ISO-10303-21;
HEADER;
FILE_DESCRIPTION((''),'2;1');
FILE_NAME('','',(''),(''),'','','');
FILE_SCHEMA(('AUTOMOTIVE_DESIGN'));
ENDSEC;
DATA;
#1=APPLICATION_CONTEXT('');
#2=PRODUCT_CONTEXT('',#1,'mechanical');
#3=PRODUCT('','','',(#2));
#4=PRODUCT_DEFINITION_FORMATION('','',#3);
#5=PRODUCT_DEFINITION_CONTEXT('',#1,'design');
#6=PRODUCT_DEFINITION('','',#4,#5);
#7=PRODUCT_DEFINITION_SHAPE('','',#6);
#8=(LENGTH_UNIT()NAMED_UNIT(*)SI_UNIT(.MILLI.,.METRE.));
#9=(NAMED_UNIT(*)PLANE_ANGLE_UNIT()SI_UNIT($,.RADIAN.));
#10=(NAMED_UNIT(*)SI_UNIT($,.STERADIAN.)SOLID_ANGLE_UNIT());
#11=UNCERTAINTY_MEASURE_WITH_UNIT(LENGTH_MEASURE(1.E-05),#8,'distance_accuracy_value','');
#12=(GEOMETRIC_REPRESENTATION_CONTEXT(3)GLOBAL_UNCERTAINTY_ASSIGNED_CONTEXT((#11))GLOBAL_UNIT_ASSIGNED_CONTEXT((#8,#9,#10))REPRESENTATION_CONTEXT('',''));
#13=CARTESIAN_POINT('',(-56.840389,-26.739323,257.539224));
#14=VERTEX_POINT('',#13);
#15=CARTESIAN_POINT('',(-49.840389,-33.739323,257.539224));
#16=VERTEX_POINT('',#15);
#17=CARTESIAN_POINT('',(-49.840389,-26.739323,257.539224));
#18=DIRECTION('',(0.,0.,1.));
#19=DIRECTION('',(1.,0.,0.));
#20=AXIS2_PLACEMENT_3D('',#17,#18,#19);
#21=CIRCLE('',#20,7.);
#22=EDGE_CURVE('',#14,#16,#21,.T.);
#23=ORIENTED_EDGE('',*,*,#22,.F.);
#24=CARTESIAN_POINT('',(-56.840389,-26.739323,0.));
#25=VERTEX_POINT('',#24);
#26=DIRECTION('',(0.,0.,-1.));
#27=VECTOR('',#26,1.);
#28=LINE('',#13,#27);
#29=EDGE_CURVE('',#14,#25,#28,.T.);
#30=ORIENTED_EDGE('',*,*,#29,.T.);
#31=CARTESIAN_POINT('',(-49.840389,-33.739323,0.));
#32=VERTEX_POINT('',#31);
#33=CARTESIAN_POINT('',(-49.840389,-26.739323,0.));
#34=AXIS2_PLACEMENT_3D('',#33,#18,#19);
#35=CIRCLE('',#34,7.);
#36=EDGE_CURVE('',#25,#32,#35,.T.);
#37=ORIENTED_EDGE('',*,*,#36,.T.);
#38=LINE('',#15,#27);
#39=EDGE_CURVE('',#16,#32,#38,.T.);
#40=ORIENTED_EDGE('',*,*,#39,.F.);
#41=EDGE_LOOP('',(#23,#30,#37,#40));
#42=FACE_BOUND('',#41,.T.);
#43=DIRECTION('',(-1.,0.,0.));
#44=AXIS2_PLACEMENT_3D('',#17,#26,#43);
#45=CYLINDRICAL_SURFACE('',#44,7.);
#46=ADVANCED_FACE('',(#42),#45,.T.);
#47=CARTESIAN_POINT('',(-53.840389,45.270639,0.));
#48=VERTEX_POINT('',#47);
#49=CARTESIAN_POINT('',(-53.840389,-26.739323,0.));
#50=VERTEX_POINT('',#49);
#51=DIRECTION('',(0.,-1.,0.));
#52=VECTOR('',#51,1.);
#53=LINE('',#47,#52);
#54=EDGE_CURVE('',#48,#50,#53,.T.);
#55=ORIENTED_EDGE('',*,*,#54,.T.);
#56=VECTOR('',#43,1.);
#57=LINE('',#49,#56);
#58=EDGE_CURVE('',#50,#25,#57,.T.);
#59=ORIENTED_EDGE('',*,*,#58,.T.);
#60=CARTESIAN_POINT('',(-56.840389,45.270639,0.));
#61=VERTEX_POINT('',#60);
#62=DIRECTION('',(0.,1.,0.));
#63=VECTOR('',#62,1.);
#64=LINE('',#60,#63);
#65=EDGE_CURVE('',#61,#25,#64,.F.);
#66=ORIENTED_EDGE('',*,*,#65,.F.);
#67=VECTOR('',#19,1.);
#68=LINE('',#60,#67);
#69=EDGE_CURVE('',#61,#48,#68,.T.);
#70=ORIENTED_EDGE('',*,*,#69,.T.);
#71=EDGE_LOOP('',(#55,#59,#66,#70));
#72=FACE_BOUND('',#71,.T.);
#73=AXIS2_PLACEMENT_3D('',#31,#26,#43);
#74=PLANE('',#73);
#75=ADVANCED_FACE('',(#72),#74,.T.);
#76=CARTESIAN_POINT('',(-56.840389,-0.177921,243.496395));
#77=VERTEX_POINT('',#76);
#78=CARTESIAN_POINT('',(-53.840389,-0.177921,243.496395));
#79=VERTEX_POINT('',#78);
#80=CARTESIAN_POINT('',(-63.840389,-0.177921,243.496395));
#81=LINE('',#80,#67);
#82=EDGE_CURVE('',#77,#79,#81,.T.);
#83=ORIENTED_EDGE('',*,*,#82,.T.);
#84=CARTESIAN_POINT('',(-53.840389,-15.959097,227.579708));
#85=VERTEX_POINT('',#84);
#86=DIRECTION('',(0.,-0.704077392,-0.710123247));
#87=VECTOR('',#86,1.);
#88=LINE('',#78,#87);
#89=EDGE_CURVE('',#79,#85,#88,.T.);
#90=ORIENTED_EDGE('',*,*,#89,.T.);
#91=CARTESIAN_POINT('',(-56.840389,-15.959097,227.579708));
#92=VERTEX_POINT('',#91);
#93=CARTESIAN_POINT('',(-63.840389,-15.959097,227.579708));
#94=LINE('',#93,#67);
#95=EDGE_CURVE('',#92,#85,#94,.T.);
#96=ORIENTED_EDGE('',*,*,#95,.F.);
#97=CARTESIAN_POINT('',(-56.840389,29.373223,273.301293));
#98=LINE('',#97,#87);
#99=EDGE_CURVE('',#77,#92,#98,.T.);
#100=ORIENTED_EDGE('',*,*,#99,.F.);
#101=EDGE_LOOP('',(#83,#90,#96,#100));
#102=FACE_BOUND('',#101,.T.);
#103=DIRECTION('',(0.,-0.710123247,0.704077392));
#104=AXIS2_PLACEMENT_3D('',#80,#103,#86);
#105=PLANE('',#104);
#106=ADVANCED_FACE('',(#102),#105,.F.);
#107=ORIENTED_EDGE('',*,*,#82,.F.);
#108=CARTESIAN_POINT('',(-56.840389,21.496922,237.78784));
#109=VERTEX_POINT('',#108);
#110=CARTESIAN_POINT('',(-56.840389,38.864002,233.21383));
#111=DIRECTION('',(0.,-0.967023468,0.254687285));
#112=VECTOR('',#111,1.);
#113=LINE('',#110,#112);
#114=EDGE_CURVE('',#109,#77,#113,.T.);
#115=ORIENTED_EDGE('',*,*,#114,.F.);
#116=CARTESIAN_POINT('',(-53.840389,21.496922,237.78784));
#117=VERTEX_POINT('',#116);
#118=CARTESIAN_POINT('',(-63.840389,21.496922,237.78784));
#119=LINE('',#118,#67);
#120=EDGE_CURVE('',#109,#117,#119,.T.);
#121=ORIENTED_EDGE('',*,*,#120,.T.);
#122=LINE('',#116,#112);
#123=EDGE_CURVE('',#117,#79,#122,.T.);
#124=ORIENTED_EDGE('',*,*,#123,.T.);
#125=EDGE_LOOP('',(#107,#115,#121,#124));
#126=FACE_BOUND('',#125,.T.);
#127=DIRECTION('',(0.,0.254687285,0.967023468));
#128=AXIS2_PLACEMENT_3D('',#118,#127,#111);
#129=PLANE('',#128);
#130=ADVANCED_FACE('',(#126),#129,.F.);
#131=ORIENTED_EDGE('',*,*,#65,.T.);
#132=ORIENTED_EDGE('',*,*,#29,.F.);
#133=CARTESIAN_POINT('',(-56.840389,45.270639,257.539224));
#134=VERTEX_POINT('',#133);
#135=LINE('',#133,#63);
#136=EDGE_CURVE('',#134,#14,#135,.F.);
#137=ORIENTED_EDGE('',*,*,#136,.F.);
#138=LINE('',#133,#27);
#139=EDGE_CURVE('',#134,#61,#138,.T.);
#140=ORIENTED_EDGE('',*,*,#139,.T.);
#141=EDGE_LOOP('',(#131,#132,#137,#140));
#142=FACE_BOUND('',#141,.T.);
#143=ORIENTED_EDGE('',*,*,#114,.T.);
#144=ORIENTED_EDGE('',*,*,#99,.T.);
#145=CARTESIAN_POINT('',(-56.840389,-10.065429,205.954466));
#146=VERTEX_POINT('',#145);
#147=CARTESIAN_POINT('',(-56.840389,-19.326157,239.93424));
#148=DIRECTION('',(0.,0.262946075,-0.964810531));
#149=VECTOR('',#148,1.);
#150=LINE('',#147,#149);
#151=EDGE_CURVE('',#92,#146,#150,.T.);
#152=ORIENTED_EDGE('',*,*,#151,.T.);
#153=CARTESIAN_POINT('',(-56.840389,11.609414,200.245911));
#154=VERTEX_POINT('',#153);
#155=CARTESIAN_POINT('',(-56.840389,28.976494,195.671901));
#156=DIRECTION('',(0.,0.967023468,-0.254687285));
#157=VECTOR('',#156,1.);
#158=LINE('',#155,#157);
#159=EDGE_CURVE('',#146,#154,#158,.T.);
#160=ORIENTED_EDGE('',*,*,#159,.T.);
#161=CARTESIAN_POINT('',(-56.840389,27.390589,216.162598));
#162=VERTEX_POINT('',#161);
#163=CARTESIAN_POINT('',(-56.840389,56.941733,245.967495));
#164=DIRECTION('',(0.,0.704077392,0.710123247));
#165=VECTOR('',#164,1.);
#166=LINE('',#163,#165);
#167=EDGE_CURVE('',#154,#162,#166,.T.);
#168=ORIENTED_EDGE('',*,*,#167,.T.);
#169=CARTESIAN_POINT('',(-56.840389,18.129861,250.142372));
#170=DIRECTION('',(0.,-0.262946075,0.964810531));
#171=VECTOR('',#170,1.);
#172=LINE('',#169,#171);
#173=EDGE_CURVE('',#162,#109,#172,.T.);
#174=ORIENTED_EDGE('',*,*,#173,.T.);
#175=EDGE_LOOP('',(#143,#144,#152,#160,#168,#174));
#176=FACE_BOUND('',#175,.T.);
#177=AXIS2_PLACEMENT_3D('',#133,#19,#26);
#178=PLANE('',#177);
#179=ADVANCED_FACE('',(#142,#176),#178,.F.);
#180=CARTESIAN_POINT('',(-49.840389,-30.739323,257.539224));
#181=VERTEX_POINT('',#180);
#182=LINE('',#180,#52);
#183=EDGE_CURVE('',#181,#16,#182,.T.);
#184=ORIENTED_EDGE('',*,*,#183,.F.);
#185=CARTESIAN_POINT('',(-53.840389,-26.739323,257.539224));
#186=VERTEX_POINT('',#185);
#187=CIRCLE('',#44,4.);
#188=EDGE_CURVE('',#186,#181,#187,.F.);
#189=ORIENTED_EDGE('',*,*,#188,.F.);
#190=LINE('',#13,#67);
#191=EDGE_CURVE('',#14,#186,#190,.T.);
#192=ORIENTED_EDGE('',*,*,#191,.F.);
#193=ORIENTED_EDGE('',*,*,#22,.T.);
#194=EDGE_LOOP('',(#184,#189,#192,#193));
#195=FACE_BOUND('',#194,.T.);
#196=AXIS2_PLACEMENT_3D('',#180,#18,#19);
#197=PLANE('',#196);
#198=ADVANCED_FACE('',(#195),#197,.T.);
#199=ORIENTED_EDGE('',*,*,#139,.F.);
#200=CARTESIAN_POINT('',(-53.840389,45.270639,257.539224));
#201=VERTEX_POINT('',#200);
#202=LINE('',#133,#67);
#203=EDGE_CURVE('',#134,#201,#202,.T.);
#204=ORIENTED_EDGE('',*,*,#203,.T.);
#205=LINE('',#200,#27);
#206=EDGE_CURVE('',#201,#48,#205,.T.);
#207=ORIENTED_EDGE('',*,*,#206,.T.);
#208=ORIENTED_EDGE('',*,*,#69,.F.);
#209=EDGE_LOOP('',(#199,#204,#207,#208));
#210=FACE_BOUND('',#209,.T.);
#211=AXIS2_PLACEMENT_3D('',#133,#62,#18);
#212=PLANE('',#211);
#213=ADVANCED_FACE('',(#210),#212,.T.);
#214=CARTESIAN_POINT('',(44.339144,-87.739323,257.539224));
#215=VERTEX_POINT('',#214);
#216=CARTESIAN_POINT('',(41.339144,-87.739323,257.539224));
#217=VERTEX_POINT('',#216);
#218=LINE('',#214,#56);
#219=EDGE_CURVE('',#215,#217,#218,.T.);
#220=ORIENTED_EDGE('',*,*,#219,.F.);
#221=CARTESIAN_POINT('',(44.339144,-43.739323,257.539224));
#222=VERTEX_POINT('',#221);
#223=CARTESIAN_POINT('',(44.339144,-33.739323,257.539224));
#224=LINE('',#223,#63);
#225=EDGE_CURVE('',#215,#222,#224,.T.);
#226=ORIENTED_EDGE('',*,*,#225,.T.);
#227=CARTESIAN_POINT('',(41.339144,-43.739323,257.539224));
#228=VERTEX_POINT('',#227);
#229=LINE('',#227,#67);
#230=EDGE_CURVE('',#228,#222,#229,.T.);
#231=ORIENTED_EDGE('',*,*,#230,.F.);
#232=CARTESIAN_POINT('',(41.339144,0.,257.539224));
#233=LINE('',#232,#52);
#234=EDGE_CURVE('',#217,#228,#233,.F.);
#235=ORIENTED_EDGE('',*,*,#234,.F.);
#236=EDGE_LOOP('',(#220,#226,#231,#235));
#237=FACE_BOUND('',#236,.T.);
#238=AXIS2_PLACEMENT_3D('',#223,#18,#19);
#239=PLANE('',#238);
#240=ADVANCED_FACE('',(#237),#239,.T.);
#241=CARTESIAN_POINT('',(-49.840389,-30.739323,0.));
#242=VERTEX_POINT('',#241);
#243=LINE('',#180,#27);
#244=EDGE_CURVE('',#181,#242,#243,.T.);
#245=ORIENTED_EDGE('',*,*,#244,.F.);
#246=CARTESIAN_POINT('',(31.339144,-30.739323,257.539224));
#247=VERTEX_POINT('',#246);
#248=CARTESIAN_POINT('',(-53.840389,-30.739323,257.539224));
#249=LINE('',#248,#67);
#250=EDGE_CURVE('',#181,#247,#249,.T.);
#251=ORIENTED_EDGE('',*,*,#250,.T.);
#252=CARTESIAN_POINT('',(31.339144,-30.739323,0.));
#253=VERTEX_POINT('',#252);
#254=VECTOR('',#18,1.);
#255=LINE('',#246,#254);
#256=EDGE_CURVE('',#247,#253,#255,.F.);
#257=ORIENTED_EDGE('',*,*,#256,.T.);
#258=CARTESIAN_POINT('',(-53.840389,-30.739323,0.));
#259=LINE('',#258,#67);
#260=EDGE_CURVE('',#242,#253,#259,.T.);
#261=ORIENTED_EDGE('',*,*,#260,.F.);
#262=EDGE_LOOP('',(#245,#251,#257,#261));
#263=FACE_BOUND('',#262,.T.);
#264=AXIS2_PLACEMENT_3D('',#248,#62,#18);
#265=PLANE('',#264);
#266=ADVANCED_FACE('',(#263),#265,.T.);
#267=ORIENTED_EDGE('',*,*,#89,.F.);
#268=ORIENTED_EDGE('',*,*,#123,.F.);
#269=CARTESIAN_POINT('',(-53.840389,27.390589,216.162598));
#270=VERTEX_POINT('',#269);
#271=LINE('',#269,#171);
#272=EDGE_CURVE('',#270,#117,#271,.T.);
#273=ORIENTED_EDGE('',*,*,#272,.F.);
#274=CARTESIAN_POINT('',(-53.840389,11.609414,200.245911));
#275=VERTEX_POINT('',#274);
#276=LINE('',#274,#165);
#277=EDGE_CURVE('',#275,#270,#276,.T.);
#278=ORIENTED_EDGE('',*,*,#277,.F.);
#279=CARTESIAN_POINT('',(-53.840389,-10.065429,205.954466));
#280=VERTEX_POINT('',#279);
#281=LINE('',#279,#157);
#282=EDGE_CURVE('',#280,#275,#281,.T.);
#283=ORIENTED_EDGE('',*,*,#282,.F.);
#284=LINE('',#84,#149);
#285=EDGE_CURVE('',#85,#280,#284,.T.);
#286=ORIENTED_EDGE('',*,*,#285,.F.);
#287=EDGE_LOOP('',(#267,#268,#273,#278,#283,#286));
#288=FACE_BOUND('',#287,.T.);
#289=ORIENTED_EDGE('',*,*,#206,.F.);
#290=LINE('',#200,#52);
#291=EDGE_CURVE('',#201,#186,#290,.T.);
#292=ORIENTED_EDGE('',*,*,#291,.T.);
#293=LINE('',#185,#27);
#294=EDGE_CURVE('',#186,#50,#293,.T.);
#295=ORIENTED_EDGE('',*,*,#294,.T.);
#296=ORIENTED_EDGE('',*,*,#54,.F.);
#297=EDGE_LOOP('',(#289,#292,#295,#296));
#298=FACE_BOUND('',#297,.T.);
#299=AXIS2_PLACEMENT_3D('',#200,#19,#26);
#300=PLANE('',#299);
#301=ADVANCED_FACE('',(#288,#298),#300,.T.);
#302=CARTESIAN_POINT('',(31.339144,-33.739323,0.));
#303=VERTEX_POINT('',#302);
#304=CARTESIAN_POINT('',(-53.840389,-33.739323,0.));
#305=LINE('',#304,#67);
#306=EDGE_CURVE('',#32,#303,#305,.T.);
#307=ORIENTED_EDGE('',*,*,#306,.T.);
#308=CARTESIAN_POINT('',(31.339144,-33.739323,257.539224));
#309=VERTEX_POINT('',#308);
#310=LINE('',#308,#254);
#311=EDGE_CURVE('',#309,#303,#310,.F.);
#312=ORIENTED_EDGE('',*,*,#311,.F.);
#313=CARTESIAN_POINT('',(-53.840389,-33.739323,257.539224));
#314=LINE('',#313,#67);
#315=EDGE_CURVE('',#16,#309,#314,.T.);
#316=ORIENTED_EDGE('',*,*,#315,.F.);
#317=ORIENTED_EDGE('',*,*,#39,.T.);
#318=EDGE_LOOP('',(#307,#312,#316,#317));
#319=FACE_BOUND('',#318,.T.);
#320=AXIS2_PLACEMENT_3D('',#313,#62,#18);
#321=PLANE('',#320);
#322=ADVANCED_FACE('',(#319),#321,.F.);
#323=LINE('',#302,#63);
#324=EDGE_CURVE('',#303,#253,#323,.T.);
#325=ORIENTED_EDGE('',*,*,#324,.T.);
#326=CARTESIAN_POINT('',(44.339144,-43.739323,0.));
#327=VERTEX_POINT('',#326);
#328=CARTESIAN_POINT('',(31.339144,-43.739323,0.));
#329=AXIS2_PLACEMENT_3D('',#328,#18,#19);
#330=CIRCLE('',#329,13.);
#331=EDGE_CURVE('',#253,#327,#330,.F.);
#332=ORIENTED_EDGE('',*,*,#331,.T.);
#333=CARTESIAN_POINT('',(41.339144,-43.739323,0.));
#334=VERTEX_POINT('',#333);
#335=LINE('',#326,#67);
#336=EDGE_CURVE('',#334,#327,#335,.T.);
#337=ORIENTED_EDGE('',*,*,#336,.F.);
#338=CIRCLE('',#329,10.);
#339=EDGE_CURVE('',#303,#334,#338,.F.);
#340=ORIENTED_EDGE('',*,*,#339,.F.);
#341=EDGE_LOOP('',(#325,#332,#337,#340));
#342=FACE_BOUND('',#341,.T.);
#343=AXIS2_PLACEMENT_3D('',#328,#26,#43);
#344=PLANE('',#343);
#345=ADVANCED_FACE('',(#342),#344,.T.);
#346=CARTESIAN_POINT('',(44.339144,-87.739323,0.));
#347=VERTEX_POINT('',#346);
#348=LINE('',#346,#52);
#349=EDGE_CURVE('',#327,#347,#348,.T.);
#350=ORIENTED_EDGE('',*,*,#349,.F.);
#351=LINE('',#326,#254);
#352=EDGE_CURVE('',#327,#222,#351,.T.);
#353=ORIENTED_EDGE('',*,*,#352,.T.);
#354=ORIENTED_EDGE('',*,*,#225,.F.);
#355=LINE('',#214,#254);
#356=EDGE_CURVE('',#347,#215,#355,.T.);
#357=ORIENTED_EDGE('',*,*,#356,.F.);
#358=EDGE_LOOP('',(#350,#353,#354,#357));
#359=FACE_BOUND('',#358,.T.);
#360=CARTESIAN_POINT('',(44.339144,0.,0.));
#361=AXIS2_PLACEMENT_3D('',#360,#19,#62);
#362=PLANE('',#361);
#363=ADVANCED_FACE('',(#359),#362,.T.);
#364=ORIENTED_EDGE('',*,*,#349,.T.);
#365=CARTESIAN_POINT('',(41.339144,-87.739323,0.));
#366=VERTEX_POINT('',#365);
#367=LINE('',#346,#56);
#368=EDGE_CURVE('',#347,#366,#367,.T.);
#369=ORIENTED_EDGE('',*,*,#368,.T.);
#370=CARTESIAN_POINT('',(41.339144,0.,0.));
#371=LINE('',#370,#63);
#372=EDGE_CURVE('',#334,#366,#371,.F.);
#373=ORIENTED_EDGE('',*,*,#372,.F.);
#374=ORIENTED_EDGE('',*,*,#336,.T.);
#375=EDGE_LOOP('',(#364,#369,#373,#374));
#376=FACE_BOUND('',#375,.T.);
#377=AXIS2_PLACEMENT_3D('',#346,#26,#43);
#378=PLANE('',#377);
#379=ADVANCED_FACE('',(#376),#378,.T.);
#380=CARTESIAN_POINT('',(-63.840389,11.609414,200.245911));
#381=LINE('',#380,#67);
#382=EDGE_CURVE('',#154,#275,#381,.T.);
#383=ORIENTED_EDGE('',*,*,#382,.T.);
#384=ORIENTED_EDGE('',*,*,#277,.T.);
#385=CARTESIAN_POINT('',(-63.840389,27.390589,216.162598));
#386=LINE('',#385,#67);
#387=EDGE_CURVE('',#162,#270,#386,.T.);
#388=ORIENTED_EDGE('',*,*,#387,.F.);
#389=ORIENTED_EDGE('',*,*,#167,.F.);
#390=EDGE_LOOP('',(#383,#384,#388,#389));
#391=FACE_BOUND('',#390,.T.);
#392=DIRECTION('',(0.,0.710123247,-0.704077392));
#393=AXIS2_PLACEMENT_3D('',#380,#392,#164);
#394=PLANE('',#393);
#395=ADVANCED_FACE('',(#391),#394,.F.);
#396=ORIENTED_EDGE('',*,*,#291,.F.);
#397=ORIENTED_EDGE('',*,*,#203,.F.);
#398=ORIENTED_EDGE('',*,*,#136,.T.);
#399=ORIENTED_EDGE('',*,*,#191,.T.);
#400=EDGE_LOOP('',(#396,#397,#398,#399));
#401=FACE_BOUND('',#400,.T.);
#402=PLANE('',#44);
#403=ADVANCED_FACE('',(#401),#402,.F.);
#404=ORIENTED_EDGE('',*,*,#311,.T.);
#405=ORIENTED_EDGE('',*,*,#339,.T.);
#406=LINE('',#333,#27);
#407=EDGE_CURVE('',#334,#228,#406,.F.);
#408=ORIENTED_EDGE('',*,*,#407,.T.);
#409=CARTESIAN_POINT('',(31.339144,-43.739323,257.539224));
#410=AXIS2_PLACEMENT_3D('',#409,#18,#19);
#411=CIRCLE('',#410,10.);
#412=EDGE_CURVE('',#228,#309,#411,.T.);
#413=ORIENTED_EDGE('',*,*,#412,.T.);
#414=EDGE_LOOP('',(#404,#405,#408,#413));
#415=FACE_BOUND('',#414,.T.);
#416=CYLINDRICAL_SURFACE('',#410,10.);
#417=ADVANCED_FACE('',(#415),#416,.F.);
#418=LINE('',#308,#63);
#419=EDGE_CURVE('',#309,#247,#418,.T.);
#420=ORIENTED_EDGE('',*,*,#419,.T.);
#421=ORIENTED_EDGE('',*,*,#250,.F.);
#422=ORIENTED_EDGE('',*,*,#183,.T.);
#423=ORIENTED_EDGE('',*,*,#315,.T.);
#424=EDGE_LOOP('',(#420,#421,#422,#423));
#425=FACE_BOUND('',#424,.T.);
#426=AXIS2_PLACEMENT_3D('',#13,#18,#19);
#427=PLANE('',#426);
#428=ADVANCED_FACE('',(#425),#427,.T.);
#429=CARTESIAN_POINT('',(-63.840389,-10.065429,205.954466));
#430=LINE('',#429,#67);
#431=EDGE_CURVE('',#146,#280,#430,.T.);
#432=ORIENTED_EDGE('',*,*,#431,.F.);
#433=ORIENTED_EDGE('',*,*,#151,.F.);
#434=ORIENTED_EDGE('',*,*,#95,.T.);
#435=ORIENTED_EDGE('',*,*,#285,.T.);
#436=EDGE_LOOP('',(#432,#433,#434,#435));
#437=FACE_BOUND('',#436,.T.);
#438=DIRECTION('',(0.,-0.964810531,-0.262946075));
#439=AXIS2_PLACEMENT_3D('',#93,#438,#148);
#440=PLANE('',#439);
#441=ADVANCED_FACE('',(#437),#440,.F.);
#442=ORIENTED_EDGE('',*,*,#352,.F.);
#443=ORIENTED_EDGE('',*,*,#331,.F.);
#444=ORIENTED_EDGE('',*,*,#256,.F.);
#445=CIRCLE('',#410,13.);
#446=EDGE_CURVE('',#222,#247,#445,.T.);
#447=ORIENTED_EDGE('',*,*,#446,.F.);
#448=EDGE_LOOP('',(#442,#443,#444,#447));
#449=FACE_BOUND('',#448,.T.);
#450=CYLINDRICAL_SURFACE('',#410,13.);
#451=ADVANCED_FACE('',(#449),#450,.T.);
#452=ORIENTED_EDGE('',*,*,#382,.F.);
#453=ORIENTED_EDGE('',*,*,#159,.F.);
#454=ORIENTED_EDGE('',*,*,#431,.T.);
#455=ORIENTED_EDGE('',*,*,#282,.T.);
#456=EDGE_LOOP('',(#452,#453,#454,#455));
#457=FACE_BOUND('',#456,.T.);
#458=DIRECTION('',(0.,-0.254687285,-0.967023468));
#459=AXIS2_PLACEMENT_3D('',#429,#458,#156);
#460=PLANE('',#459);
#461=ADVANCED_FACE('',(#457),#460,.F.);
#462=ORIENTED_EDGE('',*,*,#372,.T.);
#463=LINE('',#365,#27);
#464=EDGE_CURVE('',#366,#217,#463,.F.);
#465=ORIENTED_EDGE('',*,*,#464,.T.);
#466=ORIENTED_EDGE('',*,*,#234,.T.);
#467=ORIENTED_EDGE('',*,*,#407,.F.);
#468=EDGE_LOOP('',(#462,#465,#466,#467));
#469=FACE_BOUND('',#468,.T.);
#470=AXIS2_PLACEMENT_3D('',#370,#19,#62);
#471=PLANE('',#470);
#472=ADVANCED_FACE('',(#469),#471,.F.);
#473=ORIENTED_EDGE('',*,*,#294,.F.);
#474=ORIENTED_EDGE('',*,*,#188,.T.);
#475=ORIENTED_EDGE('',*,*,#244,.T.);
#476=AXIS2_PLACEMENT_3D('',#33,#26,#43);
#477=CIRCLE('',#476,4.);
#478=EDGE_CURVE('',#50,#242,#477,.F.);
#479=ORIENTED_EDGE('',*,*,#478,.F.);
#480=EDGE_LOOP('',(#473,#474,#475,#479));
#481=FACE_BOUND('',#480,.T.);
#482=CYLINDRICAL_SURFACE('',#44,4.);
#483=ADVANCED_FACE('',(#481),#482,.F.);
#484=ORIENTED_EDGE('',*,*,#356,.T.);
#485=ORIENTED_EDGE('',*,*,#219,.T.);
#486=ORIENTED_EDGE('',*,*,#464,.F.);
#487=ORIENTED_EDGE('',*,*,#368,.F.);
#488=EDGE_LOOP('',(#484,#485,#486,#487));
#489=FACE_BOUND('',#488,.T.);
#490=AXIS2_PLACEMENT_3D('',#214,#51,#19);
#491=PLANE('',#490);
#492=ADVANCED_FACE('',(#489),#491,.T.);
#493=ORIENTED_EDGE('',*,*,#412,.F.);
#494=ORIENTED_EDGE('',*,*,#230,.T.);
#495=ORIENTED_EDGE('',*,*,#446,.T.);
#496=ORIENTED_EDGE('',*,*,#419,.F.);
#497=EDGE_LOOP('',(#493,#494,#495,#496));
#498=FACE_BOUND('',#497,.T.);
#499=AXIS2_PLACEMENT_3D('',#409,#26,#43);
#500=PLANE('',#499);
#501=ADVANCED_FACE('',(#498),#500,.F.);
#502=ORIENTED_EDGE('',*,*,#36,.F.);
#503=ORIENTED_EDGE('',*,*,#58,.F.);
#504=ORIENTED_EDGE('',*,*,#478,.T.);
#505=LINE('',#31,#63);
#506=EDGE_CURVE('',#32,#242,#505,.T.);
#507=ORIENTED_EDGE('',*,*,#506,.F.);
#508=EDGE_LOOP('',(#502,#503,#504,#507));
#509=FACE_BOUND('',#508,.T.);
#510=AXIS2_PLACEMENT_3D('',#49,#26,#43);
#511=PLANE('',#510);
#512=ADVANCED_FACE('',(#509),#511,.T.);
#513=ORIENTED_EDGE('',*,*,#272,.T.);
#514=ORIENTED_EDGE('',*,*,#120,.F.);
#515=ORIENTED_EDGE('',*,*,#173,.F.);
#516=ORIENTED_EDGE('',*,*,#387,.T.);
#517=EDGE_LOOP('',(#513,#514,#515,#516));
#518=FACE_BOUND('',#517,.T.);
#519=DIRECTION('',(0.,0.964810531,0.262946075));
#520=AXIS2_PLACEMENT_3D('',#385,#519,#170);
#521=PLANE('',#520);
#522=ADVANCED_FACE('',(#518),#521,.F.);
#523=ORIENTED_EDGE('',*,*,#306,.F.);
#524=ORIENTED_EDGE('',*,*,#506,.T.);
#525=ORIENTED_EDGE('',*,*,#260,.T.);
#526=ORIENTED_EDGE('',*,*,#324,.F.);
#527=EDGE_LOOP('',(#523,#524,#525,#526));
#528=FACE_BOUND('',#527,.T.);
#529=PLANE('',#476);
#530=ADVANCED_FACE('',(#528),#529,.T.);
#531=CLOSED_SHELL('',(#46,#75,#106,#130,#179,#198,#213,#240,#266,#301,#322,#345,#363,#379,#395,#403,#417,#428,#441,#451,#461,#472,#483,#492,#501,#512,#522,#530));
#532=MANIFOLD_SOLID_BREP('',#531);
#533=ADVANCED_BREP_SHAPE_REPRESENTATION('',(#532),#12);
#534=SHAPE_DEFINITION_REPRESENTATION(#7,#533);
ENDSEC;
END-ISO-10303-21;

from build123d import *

# Parameters (mm, degrees)
BASE_FLANGE1_DEPTH           = 257.539224292
CUT_EXTRUDE1_DEPTH           = 10
EDGE_FLANGE1_STRIP_W         = 32
EDGE_FLANGE1_STRIP_H         = 3
EDGE_FLANGE1_STRIP_CUT_DEPTH = 257.539224292
EDGE_FLANGE1_DEPTH           = 257.539224292


# Sheet-metal steps are written as plain solids
with BuildPart() as part:
    # Sketch1 → Base-Flange1 (new body)
    with BuildSketch(Plane.XY):
        with BuildLine():
            Line((-53.840389348, 45.270638794), (-53.840389348, -26.739322638))
            ThreePointArc((-53.840389348, -26.739322638), (-52.668816472, -29.567749763), (-49.840389348, -30.739322638))
            Line((-49.840389348, -30.739322638), (44.339144169, -30.739322638))
            Line((44.339144169, -30.739322638), (44.339144169, -33.739322638))
            Line((44.339144169, -33.739322638), (-49.840389348, -33.739322638))
            ThreePointArc((-49.840389348, -33.739322638), (-54.790136816, -31.689070106), (-56.840389348, -26.739322638))
            Line((-56.840389348, -26.739322638), (-56.840389348, 45.270638794))
            Line((-56.840389348, 45.270638794), (-53.840389348, 45.270638794))
        make_face()
    extrude(amount=BASE_FLANGE1_DEPTH)

    # Sketch8 → Cut-Extrude1 (cut)
    with BuildSketch(Plane(origin=(-53.840389348, 0, 0), x_dir=(0, 0, -1), z_dir=(1, 0, 0))):
        Polygon((-216.16259768, 27.390589149), (-237.787839878, 21.496921555), (-243.496395119, -0.177921348), (-227.579708162, -15.959096657), (-205.954465965, -10.065429063), (-200.245910723, 11.60941384), align=None)
    extrude(amount=-CUT_EXTRUDE1_DEPTH, mode=Mode.SUBTRACT)

    # Edge-Flange1 strip (across the edge) → Edge-Flange1 strip cut (cut)
    with BuildSketch(Plane(origin=(44.339144169, -33.739322638, 0), x_dir=(-1, 0, 0), z_dir=(0, 0, 1))):
        with Locations((-3, -1.5)):
            Rectangle(EDGE_FLANGE1_STRIP_W, EDGE_FLANGE1_STRIP_H)
    extrude(amount=EDGE_FLANGE1_STRIP_CUT_DEPTH, mode=Mode.SUBTRACT)

    # Edge-Flange1 section (across the edge) → Edge-Flange1 (add)
    with BuildSketch(Plane(origin=(44.339144169, -33.739322638, 0), x_dir=(-1, 0, 0), z_dir=(0, 0, 1))):
        with BuildLine():
            Line((0, 10), (0, 54))
            Line((0, 54), (3, 54))
            Line((3, 54), (3, 10))
            ThreePointArc((3, 10), (5.928932188, 2.928932188), (13, 0))
            Line((13, 0), (13, -3))
            ThreePointArc((13, -3), (3.807611845, 0.807611845), (0, 10))
        make_face()
    extrude(amount=EDGE_FLANGE1_DEPTH)


solid = part.part
